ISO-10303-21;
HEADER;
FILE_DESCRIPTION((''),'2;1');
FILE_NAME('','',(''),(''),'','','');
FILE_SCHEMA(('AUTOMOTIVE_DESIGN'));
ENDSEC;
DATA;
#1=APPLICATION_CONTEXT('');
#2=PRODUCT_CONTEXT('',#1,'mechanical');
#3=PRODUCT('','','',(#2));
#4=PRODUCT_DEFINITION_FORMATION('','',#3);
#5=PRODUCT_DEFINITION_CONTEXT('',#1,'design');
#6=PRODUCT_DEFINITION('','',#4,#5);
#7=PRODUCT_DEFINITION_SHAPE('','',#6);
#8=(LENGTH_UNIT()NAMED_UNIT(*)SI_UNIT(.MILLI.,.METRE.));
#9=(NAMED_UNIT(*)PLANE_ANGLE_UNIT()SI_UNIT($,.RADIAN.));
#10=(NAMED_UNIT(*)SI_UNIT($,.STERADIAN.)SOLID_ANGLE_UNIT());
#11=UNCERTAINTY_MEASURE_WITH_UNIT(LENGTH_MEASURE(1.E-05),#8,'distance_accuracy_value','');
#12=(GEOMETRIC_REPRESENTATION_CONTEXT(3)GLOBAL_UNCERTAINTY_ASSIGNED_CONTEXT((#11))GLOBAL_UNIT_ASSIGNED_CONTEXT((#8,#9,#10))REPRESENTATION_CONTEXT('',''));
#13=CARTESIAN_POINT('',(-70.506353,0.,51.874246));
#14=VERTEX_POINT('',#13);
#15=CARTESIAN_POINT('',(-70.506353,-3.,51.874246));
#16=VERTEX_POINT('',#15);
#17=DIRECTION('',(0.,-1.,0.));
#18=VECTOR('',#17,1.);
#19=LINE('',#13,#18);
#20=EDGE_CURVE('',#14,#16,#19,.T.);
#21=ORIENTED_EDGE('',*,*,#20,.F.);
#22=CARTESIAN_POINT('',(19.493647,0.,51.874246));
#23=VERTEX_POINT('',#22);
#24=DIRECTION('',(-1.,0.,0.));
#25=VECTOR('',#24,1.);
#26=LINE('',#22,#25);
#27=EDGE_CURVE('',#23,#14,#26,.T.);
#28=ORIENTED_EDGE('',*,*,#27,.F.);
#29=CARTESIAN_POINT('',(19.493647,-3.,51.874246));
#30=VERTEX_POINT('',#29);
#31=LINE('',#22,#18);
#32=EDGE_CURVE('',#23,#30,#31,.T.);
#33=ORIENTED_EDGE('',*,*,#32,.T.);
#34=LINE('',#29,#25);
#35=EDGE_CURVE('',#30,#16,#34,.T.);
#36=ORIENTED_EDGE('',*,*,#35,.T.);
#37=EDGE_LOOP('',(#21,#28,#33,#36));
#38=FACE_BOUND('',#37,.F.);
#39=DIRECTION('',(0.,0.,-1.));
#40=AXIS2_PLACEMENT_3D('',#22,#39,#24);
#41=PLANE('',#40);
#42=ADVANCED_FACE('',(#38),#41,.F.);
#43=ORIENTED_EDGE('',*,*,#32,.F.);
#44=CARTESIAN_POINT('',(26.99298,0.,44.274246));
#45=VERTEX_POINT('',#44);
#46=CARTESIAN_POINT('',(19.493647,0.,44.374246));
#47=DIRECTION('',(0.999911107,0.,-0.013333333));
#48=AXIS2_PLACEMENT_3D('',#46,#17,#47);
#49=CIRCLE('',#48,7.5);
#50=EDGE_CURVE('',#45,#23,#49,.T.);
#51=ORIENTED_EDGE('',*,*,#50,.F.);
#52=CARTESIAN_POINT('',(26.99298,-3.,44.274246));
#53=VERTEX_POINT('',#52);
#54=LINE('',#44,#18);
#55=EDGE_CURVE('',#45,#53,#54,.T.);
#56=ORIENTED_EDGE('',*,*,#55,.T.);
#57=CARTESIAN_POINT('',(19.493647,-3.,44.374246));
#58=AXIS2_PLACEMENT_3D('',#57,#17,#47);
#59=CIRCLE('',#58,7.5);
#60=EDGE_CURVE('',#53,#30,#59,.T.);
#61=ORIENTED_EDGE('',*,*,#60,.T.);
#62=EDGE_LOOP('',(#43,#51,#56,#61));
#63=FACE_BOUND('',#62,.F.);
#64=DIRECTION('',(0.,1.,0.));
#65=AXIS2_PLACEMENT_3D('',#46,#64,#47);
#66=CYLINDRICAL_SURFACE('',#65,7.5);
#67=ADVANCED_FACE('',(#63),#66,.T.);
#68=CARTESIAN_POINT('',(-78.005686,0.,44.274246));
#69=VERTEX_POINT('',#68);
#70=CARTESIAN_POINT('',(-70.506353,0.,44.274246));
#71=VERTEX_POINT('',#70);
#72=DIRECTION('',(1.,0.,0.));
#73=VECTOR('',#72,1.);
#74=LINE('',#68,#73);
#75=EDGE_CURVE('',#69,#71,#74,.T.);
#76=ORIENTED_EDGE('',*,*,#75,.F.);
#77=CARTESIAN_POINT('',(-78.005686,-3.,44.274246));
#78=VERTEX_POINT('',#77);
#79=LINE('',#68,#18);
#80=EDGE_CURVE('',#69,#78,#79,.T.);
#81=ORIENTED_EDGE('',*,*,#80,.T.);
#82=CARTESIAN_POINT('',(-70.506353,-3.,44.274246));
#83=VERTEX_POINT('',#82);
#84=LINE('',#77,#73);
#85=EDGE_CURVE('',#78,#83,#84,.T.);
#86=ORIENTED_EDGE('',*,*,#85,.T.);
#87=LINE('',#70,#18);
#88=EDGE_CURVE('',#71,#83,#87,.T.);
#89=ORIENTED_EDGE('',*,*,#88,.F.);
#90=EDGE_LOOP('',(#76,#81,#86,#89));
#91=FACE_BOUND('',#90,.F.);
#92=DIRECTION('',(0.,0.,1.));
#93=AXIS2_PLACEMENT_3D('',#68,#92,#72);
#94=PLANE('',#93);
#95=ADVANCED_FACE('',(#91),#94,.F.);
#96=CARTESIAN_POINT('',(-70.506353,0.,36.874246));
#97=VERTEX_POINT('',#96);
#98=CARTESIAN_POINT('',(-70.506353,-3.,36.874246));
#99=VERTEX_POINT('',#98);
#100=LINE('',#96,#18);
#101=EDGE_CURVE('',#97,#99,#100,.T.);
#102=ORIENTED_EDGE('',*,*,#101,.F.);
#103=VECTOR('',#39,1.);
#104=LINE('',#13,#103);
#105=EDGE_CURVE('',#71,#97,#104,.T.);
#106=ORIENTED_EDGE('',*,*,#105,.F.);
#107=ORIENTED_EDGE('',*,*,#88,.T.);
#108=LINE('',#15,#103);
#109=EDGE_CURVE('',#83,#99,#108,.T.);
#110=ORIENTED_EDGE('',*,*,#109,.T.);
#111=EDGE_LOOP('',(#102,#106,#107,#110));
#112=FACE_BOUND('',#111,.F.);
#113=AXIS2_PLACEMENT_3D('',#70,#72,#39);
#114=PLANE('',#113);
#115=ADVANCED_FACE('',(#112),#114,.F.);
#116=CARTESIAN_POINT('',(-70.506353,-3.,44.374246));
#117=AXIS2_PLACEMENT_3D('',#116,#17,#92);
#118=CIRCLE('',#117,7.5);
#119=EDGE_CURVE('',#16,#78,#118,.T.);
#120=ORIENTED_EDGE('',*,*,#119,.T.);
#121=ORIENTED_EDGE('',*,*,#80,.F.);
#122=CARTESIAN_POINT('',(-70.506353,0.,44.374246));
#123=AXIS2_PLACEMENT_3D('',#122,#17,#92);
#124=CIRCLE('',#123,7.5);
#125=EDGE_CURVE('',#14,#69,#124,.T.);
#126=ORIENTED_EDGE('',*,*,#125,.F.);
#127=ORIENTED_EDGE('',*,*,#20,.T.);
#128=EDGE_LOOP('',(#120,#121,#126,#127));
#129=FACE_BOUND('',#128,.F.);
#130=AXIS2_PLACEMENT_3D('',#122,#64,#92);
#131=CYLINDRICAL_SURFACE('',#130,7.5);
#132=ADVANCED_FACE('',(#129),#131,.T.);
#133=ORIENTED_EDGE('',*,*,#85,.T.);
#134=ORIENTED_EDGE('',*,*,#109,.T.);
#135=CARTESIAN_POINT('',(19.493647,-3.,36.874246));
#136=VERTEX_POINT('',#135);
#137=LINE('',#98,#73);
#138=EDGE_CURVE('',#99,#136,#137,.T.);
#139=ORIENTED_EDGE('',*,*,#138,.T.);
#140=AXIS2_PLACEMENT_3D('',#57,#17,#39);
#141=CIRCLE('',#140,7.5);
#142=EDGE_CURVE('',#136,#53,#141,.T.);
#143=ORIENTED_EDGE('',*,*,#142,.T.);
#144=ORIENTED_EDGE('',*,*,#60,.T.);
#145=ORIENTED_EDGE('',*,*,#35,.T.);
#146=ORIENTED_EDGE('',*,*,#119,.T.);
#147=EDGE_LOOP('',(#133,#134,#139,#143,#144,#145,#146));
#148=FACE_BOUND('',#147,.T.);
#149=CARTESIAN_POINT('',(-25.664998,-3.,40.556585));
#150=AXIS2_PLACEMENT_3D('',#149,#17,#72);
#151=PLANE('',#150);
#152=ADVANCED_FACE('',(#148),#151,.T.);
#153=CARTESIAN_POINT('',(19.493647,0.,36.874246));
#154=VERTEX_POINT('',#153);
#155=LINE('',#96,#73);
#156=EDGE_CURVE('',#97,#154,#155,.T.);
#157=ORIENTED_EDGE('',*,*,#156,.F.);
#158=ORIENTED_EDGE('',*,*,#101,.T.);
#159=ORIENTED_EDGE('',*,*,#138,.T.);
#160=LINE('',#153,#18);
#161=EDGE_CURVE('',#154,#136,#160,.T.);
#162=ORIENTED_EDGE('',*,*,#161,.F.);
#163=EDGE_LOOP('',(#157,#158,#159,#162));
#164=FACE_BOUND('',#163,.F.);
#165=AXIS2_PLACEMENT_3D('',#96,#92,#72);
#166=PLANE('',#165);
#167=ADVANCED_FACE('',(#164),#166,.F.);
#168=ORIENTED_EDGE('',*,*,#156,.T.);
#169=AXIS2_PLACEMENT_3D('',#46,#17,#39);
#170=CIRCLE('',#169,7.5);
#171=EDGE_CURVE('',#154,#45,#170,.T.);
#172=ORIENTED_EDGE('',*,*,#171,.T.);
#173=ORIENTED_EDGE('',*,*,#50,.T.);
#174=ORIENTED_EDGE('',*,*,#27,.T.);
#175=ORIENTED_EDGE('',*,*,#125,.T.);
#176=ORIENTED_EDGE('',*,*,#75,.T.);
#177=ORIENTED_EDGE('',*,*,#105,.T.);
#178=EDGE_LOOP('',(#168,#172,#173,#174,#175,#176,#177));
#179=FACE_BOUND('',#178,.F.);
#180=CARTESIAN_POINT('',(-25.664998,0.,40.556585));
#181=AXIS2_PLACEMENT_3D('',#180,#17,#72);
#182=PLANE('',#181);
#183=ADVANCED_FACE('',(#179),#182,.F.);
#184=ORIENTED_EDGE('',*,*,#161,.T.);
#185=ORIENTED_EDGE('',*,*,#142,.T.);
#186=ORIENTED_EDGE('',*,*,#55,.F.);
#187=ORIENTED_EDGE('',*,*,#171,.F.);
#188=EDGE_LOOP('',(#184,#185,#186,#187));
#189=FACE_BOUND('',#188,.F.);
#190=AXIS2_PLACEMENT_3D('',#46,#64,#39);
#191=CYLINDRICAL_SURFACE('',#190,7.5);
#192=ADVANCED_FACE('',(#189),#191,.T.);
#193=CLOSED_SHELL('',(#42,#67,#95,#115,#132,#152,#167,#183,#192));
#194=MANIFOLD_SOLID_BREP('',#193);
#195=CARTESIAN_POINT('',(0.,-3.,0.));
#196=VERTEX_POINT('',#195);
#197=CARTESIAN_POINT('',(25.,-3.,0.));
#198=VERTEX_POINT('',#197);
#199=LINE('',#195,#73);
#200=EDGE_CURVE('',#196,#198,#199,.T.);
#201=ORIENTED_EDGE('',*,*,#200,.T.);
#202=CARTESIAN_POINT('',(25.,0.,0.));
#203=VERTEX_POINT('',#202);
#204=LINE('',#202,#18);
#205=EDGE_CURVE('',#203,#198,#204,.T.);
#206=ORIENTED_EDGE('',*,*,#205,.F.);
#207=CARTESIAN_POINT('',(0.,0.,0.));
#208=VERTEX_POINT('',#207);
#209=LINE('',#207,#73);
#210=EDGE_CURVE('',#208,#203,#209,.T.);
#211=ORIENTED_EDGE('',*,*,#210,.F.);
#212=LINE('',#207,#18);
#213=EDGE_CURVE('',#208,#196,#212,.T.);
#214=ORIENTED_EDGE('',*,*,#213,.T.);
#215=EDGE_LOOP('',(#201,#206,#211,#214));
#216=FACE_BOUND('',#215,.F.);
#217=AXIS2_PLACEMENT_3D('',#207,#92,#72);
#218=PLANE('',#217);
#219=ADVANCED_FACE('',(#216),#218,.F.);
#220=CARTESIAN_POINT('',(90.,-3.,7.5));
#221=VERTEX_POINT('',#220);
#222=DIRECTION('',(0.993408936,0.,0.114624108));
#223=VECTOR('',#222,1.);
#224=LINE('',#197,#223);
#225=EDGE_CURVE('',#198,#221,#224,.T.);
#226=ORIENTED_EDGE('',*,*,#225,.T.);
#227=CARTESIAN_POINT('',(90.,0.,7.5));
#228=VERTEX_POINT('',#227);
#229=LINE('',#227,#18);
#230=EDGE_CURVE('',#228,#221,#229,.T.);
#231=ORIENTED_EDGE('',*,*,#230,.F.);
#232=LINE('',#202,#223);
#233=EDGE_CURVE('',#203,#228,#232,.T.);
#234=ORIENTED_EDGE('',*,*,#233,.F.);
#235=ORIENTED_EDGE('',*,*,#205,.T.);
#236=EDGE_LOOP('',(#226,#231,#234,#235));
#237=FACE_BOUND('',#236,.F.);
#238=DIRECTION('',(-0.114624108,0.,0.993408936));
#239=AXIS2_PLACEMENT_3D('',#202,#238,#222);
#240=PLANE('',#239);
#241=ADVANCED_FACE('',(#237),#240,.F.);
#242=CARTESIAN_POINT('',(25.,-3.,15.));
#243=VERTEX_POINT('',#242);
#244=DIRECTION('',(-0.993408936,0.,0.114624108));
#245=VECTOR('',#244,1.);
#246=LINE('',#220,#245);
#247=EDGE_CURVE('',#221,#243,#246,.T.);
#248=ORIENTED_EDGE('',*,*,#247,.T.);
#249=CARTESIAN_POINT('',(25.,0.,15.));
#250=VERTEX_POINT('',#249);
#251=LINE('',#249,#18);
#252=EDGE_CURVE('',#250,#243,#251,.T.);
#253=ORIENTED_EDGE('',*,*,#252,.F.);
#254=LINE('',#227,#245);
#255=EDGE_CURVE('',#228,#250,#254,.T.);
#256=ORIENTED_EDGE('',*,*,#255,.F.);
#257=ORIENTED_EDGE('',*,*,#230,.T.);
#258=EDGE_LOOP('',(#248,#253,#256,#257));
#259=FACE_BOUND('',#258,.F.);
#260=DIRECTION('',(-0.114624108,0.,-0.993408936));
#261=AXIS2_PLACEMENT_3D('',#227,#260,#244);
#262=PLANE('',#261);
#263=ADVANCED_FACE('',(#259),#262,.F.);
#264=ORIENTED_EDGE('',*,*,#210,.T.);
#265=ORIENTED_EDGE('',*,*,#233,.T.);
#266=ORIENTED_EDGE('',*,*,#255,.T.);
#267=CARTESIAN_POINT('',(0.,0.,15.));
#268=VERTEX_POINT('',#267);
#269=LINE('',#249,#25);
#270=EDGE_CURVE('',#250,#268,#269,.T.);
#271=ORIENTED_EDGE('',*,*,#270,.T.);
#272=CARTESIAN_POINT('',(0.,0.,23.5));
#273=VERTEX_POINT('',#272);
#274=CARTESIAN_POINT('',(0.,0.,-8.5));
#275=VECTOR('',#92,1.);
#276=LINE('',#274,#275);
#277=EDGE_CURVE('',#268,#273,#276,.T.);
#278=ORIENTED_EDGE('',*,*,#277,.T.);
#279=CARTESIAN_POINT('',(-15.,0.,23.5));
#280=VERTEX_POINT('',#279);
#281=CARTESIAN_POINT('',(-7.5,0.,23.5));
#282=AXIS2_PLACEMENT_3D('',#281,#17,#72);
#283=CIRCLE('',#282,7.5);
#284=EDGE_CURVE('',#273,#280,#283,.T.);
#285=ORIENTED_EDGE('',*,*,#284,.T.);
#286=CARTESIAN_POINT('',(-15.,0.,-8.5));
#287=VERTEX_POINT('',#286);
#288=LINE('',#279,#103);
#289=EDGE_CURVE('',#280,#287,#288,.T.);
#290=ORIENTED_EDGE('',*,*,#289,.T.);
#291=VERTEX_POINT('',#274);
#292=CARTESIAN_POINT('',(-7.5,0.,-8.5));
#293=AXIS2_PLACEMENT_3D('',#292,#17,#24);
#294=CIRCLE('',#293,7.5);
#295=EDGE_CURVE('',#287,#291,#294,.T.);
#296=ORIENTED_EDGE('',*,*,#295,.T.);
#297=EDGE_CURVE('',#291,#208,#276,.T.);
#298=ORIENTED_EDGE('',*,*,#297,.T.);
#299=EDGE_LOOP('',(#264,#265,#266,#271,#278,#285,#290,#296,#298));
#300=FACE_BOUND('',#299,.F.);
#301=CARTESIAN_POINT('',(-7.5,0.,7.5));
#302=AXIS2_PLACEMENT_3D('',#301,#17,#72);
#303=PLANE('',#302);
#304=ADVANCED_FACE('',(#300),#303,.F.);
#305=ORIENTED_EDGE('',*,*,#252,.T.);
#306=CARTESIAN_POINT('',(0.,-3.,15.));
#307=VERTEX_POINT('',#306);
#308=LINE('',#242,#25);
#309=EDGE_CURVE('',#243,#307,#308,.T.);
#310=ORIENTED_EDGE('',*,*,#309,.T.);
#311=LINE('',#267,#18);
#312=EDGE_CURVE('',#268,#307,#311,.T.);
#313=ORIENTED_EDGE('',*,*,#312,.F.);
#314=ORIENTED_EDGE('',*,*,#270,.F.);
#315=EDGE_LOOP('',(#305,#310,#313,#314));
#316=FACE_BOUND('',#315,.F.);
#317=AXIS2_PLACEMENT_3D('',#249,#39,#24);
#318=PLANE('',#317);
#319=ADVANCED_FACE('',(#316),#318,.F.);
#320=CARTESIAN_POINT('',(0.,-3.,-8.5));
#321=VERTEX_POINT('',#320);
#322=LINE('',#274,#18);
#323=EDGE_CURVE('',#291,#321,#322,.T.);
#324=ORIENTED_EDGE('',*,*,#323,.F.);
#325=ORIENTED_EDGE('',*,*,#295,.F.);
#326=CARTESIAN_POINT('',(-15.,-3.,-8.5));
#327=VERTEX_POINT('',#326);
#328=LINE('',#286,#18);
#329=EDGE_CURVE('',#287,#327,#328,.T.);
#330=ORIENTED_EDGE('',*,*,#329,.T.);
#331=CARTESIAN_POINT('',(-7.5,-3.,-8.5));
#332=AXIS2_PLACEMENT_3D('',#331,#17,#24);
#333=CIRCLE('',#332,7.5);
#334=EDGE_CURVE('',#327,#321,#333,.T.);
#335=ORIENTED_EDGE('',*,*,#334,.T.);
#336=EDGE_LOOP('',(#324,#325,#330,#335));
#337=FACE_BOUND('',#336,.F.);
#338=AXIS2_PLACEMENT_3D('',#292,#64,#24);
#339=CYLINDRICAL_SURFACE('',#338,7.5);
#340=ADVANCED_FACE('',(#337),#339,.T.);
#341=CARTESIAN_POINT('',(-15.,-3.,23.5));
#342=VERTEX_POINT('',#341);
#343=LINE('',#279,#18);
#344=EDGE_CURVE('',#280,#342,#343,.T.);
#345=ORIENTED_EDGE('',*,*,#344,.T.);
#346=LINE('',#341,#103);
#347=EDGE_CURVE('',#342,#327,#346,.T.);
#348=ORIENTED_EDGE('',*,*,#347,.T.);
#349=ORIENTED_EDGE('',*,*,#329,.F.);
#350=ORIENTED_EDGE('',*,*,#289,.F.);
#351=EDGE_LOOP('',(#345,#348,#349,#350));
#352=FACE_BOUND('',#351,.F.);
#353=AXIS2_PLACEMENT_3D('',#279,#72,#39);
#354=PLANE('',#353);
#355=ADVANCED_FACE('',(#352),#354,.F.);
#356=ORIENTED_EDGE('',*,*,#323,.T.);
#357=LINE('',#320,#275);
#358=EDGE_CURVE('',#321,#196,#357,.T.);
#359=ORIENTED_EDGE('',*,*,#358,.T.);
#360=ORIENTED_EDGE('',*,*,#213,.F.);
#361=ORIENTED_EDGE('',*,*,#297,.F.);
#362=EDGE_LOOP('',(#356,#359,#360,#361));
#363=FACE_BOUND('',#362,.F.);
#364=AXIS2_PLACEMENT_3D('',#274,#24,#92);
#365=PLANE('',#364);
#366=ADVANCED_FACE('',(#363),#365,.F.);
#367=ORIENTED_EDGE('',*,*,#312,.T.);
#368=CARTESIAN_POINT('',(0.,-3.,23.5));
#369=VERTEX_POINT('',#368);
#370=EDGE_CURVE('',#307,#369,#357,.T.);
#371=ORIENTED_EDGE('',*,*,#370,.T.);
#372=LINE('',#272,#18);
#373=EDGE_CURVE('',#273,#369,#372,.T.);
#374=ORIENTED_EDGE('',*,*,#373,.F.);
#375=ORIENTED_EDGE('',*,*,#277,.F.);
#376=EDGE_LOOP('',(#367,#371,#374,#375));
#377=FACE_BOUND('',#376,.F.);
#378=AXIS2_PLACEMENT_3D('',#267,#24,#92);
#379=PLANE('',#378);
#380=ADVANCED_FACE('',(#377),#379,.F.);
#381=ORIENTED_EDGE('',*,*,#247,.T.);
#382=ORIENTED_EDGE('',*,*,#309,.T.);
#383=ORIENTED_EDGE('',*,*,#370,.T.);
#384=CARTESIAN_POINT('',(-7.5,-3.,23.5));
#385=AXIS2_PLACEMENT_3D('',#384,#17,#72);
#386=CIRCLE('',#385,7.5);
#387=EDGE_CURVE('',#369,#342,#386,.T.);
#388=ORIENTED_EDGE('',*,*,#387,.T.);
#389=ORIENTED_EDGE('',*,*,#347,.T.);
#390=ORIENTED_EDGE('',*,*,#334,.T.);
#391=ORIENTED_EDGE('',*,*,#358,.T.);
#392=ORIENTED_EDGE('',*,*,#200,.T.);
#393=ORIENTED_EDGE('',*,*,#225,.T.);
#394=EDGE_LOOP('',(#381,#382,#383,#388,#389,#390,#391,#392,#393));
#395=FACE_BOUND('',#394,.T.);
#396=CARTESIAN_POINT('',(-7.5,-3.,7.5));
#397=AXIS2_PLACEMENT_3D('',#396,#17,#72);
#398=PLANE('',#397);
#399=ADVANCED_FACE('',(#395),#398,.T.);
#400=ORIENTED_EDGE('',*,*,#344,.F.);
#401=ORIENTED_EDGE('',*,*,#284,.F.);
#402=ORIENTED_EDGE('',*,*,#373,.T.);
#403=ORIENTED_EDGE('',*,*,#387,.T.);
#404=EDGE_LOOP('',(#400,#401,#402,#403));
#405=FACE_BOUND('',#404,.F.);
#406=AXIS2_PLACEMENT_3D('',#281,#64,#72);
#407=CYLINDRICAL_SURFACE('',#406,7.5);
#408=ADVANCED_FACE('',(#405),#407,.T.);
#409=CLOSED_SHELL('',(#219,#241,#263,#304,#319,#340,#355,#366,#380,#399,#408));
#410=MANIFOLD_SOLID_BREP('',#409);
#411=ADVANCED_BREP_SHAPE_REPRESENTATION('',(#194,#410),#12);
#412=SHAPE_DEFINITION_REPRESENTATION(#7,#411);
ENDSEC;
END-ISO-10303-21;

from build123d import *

# Parameters (mm, degrees)
F0_W     = 15
F0_H     = 15
F0_R     = 1.5
F1_DEPTH = 3


# Not quite as in the source:
# - a feature names something its author has since deleted; it is built from what else it names


with BuildPart() as f1:
    # F0 (on Front) → F1 (new body)
    with BuildSketch(Plane.XZ):
        with Locations((-7.5, 7.5)):
            Rectangle(F0_W, F0_H)
        with BuildLine():
            Line((-15, 15), (0, 15))
            Line((0, 15), (0, 23.5))
            ThreePointArc((0, 23.5), (-7.5, 31), (-15, 23.5))
            Line((-15, 23.5), (-15, 15))
        make_face()
        with Locations((-7.5, 23.5)):
            Circle(F0_R, mode=Mode.SUBTRACT)
        with Locations((-7.5, 23.5)):
            Circle(F0_R)
        with BuildLine():
            Line((0, -8.5), (0, 0))
            Line((0, 0), (-15, 0))
            Line((-15, 0), (-15, -8.5))
            ThreePointArc((-15, -8.5), (-7.5, -16), (0, -8.5))
        make_face()
        with Locations((-7.5, -8.5)):
            Circle(F0_R, mode=Mode.SUBTRACT)
        Polygon((0, 15), (0, 0), (25, 0), (90, 7.5), (25, 15), align=None)
        with Locations((-7.5, -8.5)):
            Circle(F0_R)
    extrude(amount=F1_DEPTH)


with BuildPart() as f1b:
    # F0 (on Front) → F1, piece 2 (new body)
    with BuildSketch(Plane.XZ):
        with BuildLine():
            Line((-70.5063530058, 44.2742461503), (-70.5063530058, 36.8742461503))
            Line((-70.5063530058, 36.8742461503), (19.4936469942, 36.8742461503))
            Line((19.4936469942, 36.8742461503), (19.4936469942, 42.8742461503))
            ThreePointArc((19.4936469942, 42.8742461503), (18.4689519176, 43.2788010352), (17.9969840395, 44.2742461503))
            Line((17.9969840395, 44.2742461503), (-59.8173476756, 44.2742461503))
            Line((-59.8173476756, 44.2742461503), (-70.5063530058, 44.2742461503))
        make_face()
        with BuildLine():
            Line((-70.5063530058, 51.8742461503), (-70.5063530058, 44.2742461503))
            Line((-70.5063530058, 44.2742461503), (-59.8173476756, 44.2742461503))
            Line((-59.8173476756, 44.2742461503), (17.9969840395, 44.2742461503))
            ThreePointArc((17.9969840395, 44.2742461503), (18.3982018792, 45.3989412269), (19.4936469942, 45.8742461503))
            Line((19.4936469942, 45.8742461503), (19.4936469942, 51.8742461503))
            Line((19.4936469942, 51.8742461503), (-70.5063530058, 51.8742461503))
        make_face()
        with BuildLine():
            Line((19.4936469942, 42.8742461503), (19.4936469942, 36.8742461503))
            ThreePointArc((19.4936469942, 36.8742461503), (24.7614738707, 39.0357070242), (26.9929802979, 44.2742461503))
            Line((26.9929802979, 44.2742461503), (20.9903099489, 44.2742461503))
            ThreePointArc((20.9903099489, 44.2742461503), (20.5183420708, 43.2788010352), (19.4936469942, 42.8742461503))
        make_face()
        with BuildLine():
            Line((20.9903099489, 44.2742461503), (26.9929802979, 44.2742461503))
            ThreePointArc((26.9929802979, 44.2742461503), (24.8321861202, 49.6420730267), (19.4936469942, 51.8742461503))
            Line((19.4936469942, 51.8742461503), (19.4936469942, 45.8742461503))
            ThreePointArc((19.4936469942, 45.8742461503), (20.554307166, 45.434906322), (20.9936469942, 44.3742461503))
            ThreePointArc((20.9936469942, 44.3742461503), (20.9928125008, 44.3242183183), (20.9903099489, 44.2742461503))
        make_face()
        with BuildLine():
            Line((19.4936469942, 45.8742461503), (19.4936469942, 44.2742461503))
            Line((19.4936469942, 44.2742461503), (20.9903099489, 44.2742461503))
            ThreePointArc((20.9903099489, 44.2742461503), (20.9928125008, 44.3242183183), (20.9936469942, 44.3742461503))
            ThreePointArc((20.9936469942, 44.3742461503), (20.554307166, 45.434906322), (19.4936469942, 45.8742461503))
        make_face()
        with BuildLine():
            Line((17.9969840395, 44.2742461503), (19.4936469942, 44.2742461503))
            Line((19.4936469942, 44.2742461503), (19.4936469942, 45.8742461503))
            ThreePointArc((19.4936469942, 45.8742461503), (18.3982018792, 45.3989412269), (17.9969840395, 44.2742461503))
        make_face()
        with BuildLine():
            Line((19.4936469942, 44.2742461503), (19.4936469942, 42.8742461503))
            ThreePointArc((19.4936469942, 42.8742461503), (20.5183420708, 43.2788010352), (20.9903099489, 44.2742461503))
            Line((20.9903099489, 44.2742461503), (19.4936469942, 44.2742461503))
        make_face()
        with BuildLine():
            ThreePointArc((17.9969840395, 44.2742461503), (18.4689519176, 43.2788010352), (19.4936469942, 42.8742461503))
            Line((19.4936469942, 42.8742461503), (19.4936469942, 44.2742461503))
            Line((19.4936469942, 44.2742461503), (17.9969840395, 44.2742461503))
        make_face()
        with BuildLine():
            Line((-78.0056863095, 44.2742461503), (-70.5063530058, 44.2742461503))
            Line((-70.5063530058, 44.2742461503), (-70.5063530058, 51.8742461503))
            ThreePointArc((-70.5063530058, 51.8742461503), (-75.8448921318, 49.6420730267), (-78.0056863095, 44.2742461503))
        make_face()
    extrude(amount=F1_DEPTH)


solid = Compound([f1.part, f1b.part])
